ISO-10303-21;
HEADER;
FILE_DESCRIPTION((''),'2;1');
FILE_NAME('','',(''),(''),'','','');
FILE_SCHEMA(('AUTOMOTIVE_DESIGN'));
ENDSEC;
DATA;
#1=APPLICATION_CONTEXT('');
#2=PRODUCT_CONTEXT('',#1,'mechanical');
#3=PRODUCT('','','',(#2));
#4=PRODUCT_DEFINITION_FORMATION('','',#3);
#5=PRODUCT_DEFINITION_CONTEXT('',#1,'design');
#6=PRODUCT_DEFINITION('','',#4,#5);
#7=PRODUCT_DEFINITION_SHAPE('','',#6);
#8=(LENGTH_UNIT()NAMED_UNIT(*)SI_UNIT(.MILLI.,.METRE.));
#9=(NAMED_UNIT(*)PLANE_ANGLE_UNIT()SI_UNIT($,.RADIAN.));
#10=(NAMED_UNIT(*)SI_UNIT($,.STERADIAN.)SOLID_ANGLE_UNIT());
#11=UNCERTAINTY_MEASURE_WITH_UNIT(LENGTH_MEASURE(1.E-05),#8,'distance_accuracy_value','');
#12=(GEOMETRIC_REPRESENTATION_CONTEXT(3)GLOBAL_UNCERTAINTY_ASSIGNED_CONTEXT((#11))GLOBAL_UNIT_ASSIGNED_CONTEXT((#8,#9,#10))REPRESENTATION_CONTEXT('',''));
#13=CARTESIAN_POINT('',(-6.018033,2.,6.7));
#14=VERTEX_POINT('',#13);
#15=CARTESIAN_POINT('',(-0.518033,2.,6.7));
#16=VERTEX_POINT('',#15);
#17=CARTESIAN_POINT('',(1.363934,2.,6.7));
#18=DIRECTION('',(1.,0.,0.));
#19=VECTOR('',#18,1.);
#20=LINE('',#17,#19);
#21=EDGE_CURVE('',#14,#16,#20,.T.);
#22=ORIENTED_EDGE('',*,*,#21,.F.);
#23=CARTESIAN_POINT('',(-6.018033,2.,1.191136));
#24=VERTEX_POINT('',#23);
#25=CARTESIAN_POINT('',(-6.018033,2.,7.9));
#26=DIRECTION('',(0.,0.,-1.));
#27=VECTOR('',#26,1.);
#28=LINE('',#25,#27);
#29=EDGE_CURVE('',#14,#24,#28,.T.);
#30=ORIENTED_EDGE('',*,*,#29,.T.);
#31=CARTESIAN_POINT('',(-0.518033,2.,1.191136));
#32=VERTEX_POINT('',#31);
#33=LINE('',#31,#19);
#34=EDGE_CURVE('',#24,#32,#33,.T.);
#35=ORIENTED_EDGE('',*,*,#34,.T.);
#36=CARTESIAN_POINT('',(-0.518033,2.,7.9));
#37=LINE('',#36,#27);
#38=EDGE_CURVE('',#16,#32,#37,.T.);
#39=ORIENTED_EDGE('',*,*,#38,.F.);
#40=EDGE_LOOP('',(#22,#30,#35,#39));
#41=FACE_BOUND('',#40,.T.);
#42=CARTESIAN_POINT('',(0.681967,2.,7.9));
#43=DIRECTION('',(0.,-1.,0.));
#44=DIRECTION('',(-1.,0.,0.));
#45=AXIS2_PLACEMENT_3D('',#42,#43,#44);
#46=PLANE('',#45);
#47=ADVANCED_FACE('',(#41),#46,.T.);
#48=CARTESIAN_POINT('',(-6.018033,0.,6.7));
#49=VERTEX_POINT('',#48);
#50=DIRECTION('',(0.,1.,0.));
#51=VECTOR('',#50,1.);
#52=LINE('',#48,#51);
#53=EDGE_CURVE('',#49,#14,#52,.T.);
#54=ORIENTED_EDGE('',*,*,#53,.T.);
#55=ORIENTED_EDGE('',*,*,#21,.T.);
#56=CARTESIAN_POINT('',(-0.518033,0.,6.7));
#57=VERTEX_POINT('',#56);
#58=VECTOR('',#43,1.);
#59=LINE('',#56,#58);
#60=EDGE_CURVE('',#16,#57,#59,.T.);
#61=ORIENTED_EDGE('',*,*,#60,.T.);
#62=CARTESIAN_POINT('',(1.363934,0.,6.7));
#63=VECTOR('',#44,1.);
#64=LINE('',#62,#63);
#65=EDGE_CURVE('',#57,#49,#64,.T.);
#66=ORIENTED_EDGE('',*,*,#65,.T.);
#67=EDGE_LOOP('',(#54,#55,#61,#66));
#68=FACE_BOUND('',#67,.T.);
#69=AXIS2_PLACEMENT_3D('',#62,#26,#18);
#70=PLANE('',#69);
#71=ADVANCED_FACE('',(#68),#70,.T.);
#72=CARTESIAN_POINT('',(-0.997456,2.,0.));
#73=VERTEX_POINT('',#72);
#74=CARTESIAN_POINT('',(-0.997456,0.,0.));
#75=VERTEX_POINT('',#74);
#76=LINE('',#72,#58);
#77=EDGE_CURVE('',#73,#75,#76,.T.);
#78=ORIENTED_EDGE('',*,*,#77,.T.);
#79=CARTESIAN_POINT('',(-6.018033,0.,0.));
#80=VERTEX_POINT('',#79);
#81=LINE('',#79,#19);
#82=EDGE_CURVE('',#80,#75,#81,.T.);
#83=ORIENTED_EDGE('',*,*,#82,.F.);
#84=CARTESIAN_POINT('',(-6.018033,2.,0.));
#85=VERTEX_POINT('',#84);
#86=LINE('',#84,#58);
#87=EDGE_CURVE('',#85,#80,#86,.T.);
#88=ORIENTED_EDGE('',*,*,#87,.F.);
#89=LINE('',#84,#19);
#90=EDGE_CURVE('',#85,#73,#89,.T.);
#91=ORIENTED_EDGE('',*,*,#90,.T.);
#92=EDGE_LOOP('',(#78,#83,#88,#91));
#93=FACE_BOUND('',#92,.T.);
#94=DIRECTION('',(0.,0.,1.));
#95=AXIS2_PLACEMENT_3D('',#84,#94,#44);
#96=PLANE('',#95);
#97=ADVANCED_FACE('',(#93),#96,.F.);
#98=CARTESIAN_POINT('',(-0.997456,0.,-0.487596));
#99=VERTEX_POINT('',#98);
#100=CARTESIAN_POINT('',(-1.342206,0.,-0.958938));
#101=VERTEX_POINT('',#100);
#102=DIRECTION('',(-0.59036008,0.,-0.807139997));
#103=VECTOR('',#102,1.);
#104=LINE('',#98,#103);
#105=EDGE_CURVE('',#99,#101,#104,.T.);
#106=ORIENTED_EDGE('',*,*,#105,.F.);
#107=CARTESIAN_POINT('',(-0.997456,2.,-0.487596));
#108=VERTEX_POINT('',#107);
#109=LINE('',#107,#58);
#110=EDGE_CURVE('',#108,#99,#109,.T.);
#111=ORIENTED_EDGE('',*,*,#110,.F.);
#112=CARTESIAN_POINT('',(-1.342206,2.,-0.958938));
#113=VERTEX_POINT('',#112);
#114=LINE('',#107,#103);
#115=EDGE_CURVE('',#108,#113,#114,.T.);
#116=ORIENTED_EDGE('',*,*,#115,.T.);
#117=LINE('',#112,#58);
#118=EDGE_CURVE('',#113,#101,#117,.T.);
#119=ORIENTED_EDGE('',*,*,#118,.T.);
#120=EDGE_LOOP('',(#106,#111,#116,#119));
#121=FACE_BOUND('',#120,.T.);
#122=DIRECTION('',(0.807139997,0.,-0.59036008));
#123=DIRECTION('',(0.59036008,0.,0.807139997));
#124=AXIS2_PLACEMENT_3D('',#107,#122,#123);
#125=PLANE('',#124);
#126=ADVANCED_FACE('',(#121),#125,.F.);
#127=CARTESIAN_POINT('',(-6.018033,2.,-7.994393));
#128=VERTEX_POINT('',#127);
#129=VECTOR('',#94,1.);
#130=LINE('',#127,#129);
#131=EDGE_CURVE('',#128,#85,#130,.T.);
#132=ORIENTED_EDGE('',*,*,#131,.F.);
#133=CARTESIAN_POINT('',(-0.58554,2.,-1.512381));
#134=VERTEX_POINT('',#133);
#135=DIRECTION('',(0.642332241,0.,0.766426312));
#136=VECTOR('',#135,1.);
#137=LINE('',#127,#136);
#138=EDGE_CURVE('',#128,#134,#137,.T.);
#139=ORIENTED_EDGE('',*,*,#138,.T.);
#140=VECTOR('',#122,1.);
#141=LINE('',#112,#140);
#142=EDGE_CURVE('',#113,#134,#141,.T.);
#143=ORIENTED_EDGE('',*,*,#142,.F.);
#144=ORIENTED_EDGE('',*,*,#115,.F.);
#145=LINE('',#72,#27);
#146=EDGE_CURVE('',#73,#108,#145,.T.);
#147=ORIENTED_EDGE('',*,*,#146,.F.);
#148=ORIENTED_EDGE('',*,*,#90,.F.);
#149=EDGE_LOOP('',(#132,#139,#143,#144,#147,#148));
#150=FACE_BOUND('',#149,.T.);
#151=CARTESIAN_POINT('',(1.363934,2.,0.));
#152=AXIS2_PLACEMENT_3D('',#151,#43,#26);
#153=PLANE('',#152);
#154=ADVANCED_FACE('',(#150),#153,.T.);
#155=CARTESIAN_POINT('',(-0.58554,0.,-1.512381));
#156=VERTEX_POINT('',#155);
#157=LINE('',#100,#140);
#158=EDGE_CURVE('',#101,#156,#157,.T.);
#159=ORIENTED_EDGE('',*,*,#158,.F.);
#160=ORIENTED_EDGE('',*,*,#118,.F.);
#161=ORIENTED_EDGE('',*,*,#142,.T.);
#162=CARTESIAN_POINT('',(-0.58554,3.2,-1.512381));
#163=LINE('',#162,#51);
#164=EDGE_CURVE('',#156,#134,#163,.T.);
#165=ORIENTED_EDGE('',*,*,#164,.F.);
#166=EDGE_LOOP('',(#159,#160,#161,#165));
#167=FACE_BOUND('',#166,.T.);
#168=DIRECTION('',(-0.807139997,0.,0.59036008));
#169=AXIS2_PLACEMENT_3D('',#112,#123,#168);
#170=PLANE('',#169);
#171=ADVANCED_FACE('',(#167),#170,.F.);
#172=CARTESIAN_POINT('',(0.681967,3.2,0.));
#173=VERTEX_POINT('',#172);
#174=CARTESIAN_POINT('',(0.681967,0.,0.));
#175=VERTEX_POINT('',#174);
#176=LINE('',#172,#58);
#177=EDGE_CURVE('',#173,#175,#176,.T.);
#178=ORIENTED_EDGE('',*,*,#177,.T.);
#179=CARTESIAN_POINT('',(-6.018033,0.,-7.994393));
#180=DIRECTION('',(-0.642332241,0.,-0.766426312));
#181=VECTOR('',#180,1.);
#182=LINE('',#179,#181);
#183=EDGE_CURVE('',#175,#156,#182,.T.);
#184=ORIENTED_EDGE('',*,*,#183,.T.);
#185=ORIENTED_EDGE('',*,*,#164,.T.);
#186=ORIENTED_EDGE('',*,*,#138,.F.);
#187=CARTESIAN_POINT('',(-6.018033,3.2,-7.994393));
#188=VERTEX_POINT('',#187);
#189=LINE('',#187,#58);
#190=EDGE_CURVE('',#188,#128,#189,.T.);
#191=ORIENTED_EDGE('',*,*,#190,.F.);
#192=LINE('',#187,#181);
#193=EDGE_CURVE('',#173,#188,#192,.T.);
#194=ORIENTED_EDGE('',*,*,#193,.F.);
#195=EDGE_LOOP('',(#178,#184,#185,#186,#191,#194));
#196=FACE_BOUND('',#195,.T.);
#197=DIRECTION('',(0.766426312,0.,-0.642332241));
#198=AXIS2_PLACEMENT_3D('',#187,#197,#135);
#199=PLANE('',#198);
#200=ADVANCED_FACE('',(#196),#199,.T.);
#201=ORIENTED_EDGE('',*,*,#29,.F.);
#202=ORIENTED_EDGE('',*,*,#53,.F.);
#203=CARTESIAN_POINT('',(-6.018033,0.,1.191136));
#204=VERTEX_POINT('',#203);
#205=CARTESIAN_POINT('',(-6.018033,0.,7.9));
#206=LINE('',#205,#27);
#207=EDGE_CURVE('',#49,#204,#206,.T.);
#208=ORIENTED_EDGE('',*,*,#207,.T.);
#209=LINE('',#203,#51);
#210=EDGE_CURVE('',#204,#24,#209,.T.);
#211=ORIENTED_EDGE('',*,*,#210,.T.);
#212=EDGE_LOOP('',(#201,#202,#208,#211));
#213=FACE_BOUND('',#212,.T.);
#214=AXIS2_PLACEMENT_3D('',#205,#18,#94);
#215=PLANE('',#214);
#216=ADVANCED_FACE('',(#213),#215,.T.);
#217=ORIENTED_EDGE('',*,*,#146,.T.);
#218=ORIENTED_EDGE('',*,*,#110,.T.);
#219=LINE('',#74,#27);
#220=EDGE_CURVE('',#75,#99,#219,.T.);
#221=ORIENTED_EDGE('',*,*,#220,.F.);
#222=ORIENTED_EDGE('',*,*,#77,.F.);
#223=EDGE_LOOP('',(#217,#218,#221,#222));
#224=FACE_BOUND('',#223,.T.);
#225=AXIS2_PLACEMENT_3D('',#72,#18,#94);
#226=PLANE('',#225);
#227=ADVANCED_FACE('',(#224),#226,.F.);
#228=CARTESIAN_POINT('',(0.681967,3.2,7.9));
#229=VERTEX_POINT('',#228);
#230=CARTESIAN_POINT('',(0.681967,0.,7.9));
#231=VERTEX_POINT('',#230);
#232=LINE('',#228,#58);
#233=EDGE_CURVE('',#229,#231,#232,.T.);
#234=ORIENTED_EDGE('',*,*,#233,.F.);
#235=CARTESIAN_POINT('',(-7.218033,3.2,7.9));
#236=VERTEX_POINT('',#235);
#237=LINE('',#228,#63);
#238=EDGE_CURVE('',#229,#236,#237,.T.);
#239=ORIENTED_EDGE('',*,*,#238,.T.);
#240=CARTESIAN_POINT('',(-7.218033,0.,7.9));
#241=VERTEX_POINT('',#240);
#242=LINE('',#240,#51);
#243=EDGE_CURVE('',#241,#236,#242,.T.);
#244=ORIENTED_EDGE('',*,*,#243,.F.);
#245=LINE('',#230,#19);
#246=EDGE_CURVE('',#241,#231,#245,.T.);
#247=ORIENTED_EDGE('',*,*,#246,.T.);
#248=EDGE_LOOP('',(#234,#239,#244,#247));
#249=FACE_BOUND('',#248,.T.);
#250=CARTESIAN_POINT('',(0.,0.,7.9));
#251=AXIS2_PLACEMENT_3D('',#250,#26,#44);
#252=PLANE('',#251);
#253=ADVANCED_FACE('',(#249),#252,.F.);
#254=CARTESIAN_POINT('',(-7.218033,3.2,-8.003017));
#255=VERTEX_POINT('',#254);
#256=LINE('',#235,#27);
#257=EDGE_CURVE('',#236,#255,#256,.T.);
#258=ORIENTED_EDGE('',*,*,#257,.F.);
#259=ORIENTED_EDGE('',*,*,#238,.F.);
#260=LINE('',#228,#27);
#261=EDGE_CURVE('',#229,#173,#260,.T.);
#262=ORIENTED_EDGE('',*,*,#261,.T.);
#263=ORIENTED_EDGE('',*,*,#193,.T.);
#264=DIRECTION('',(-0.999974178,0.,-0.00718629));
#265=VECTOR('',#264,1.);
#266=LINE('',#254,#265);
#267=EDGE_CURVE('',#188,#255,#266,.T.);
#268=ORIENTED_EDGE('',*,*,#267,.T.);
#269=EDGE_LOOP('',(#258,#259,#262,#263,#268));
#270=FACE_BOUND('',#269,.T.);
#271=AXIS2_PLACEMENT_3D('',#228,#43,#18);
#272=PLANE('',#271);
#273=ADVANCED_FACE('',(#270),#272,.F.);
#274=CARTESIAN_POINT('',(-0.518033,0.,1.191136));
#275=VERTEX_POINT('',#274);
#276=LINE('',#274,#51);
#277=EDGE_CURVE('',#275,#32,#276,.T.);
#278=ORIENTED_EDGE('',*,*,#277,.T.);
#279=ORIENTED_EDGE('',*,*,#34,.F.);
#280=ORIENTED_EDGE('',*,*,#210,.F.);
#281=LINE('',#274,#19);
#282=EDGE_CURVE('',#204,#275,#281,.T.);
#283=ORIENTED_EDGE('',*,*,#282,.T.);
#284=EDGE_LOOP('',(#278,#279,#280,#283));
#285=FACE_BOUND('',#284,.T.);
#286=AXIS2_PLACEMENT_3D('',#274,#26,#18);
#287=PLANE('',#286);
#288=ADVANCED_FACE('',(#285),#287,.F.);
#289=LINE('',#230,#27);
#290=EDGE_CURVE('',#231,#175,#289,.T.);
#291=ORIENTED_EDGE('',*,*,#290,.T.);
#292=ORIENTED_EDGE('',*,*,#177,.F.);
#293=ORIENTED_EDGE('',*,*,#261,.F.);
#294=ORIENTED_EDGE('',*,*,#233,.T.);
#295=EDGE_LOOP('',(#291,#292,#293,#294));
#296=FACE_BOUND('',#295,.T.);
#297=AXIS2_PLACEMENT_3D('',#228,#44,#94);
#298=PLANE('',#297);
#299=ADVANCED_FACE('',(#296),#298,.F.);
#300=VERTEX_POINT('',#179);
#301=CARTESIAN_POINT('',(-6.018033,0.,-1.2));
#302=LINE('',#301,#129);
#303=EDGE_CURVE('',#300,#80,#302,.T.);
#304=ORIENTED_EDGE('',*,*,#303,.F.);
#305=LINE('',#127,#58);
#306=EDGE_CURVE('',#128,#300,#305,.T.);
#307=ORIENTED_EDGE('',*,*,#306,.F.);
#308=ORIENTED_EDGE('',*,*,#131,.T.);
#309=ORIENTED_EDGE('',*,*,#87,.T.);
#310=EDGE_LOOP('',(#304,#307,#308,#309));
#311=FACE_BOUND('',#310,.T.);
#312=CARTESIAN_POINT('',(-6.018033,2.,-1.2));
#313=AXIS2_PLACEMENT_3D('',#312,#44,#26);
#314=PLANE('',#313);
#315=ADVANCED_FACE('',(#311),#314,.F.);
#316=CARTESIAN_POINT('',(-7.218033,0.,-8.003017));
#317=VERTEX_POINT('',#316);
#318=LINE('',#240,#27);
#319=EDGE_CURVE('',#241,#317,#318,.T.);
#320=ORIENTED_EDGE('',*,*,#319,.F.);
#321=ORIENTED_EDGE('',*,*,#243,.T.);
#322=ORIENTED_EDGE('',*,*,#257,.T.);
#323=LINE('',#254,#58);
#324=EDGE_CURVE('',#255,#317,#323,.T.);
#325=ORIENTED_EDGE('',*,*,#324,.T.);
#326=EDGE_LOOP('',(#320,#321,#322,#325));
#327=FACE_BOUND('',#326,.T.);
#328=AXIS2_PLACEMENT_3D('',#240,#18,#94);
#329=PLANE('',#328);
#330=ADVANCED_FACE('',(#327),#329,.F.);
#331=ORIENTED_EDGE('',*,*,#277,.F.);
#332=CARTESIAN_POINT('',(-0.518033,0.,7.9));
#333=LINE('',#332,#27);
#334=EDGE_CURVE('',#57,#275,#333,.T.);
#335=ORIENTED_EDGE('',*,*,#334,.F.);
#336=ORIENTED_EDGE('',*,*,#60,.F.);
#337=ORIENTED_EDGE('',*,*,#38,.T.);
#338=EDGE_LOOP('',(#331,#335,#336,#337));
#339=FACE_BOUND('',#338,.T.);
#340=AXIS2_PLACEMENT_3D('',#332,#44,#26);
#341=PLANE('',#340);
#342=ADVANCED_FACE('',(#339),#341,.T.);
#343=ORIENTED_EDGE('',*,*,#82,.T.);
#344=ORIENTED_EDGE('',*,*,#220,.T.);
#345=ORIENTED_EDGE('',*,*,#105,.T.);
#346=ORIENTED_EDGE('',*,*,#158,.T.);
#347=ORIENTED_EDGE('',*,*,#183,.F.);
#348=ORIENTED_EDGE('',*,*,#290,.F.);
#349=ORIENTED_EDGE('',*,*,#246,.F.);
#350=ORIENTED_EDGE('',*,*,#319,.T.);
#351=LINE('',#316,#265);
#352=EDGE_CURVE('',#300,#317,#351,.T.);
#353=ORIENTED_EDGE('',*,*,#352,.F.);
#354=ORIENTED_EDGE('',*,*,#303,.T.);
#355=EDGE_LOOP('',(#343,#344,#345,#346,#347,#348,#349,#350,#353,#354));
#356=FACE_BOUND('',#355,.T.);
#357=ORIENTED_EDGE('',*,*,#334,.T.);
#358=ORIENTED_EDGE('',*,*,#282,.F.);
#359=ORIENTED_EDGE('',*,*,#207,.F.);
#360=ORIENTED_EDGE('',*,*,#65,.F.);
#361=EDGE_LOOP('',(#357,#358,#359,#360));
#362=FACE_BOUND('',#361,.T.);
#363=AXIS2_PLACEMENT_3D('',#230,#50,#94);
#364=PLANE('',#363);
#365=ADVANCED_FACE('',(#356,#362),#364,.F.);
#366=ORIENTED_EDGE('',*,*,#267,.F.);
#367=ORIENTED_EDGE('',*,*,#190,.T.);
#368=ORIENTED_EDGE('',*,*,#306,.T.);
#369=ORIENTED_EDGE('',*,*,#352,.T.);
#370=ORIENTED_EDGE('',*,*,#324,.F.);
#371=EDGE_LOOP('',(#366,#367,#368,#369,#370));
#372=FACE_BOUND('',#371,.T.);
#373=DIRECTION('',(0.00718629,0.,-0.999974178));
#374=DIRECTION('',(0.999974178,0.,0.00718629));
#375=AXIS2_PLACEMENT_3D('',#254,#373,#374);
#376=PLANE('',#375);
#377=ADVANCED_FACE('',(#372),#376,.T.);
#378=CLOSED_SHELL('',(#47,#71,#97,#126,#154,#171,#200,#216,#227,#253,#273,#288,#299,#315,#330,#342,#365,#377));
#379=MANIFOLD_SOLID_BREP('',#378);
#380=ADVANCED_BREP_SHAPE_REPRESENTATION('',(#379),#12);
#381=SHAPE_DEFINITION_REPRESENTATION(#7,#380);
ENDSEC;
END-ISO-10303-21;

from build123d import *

# Parameters (mm, degrees)
MAINBASESKETCH_W         = 7.9
MAINBASESKETCH_H         = 3.2
MAINBASEEXTRUDE_DEPTH    = 7.9
MAINBASESHELL_T          = -1.2
SKETCH171_W              = 5.5
SKETCH171_H              = 1.191135725
BOSS_EXTRUDE23_DEPTH     = 2
CUT_EXTRUDE58_DEPTH      = 12.83470157
CUT_EXTRUDE58_DEPTH_BACK = 12.83470157
SWEEP28_DEPTH            = 3.2
PLAINHALF3_DEPTH         = 2
CUT_EXTRUDE59_DEPTH      = 13.162994561


# Read off the part's stored shape, not the designer's step: Sweep28
with BuildPart() as part:
    # MainBaseSketch → MainBaseExtrude (new, symmetric)
    with BuildSketch(Plane.XY):
        with Locations((4.631967213, 1.6)):
            Rectangle(MAINBASESKETCH_W, MAINBASESKETCH_H)
    extrude(amount=MAINBASEEXTRUDE_DEPTH, both=True)

    # MainBaseShell
    mainbaseshell_openings = [part.faces().sort_by_distance(p)[0] for p in [
        (4.631967213, 0, 0),
    ]]
    offset(amount=MAINBASESHELL_T, openings=mainbaseshell_openings, kind=Kind.INTERSECTION)

    # Sketch171 → Boss-Extrude23 (add)
    with BuildSketch(Plane(origin=(0, 2, 0), x_dir=(-1, 0, 0), z_dir=(0, -1, 0))):
        with Locations((-4.631967213, -0.595567863)):
            Rectangle(SKETCH171_W, SKETCH171_H)
    extrude(amount=BOSS_EXTRUDE23_DEPTH)

    # Sketch173 → Cut-Extrude58 (cut, two sides: drawn at the far end of the back side and taken through both)
    with BuildSketch(Plane(origin=(0, 2, 0), x_dir=(-1, 0, 0), z_dir=(0, -1, 0)).offset(-CUT_EXTRUDE58_DEPTH_BACK)):
        Polygon((-7.381967213, 0), (-8.581967213, 0), (-8.581967213, 7.9), (-0.681967213, 7.9), (-0.681967213, 0), align=None)
    extrude(amount=CUT_EXTRUDE58_DEPTH + CUT_EXTRUDE58_DEPTH_BACK, mode=Mode.SUBTRACT)

    # Sweep28 outline → Sweep28 (add)
    with BuildSketch(Plane(origin=(0, 0, 0), x_dir=(1, 0, 0), z_dir=(0, 1, 0))):
        Polygon((8.581967213, 0), (8.581967213, 8.003016647), (7.381967213, 7.994392876), (0.681967213, 0), align=None)
    extrude(amount=SWEEP28_DEPTH)

    # Sketch174 → PlainHalf3 (cut)
    with BuildSketch(Plane(origin=(0, 0, 0), x_dir=(-1, 0, 0), z_dir=(0, -1, 0))):
        Polygon((-7.381967213, 7.994392876), (-7.381967213, 1.2), (-7.381967213, 0), (-2.361390112, 0), (-2.361390112, 0.487595591), (-2.706140626, 0.958938316), (-1.846183268, 1.587930185), align=None)
    extrude(amount=-PLAINHALF3_DEPTH, mode=Mode.SUBTRACT)

    # Mirror15: part across plane


with BuildPart() as part_1:
    add(part.part)
    add(part.part.mirror(Plane.ZY.offset(-0.681967213)))

    # Sketch178 → Cut-Extrude59 (cut, through all)
    with BuildSketch(Plane(origin=(0, 0, 0), x_dir=(-1, 0, 0), z_dir=(0, -1, 0))):
        Polygon((-8.581967213, -7.9), (-0.681967213, -7.9), (-0.681967213, 0.079862465), (-7.381967213, 7.994392876), (-8.581967213, 8.003016647), align=None)
    extrude(amount=-CUT_EXTRUDE59_DEPTH, mode=Mode.SUBTRACT)


solid = part_1.part
